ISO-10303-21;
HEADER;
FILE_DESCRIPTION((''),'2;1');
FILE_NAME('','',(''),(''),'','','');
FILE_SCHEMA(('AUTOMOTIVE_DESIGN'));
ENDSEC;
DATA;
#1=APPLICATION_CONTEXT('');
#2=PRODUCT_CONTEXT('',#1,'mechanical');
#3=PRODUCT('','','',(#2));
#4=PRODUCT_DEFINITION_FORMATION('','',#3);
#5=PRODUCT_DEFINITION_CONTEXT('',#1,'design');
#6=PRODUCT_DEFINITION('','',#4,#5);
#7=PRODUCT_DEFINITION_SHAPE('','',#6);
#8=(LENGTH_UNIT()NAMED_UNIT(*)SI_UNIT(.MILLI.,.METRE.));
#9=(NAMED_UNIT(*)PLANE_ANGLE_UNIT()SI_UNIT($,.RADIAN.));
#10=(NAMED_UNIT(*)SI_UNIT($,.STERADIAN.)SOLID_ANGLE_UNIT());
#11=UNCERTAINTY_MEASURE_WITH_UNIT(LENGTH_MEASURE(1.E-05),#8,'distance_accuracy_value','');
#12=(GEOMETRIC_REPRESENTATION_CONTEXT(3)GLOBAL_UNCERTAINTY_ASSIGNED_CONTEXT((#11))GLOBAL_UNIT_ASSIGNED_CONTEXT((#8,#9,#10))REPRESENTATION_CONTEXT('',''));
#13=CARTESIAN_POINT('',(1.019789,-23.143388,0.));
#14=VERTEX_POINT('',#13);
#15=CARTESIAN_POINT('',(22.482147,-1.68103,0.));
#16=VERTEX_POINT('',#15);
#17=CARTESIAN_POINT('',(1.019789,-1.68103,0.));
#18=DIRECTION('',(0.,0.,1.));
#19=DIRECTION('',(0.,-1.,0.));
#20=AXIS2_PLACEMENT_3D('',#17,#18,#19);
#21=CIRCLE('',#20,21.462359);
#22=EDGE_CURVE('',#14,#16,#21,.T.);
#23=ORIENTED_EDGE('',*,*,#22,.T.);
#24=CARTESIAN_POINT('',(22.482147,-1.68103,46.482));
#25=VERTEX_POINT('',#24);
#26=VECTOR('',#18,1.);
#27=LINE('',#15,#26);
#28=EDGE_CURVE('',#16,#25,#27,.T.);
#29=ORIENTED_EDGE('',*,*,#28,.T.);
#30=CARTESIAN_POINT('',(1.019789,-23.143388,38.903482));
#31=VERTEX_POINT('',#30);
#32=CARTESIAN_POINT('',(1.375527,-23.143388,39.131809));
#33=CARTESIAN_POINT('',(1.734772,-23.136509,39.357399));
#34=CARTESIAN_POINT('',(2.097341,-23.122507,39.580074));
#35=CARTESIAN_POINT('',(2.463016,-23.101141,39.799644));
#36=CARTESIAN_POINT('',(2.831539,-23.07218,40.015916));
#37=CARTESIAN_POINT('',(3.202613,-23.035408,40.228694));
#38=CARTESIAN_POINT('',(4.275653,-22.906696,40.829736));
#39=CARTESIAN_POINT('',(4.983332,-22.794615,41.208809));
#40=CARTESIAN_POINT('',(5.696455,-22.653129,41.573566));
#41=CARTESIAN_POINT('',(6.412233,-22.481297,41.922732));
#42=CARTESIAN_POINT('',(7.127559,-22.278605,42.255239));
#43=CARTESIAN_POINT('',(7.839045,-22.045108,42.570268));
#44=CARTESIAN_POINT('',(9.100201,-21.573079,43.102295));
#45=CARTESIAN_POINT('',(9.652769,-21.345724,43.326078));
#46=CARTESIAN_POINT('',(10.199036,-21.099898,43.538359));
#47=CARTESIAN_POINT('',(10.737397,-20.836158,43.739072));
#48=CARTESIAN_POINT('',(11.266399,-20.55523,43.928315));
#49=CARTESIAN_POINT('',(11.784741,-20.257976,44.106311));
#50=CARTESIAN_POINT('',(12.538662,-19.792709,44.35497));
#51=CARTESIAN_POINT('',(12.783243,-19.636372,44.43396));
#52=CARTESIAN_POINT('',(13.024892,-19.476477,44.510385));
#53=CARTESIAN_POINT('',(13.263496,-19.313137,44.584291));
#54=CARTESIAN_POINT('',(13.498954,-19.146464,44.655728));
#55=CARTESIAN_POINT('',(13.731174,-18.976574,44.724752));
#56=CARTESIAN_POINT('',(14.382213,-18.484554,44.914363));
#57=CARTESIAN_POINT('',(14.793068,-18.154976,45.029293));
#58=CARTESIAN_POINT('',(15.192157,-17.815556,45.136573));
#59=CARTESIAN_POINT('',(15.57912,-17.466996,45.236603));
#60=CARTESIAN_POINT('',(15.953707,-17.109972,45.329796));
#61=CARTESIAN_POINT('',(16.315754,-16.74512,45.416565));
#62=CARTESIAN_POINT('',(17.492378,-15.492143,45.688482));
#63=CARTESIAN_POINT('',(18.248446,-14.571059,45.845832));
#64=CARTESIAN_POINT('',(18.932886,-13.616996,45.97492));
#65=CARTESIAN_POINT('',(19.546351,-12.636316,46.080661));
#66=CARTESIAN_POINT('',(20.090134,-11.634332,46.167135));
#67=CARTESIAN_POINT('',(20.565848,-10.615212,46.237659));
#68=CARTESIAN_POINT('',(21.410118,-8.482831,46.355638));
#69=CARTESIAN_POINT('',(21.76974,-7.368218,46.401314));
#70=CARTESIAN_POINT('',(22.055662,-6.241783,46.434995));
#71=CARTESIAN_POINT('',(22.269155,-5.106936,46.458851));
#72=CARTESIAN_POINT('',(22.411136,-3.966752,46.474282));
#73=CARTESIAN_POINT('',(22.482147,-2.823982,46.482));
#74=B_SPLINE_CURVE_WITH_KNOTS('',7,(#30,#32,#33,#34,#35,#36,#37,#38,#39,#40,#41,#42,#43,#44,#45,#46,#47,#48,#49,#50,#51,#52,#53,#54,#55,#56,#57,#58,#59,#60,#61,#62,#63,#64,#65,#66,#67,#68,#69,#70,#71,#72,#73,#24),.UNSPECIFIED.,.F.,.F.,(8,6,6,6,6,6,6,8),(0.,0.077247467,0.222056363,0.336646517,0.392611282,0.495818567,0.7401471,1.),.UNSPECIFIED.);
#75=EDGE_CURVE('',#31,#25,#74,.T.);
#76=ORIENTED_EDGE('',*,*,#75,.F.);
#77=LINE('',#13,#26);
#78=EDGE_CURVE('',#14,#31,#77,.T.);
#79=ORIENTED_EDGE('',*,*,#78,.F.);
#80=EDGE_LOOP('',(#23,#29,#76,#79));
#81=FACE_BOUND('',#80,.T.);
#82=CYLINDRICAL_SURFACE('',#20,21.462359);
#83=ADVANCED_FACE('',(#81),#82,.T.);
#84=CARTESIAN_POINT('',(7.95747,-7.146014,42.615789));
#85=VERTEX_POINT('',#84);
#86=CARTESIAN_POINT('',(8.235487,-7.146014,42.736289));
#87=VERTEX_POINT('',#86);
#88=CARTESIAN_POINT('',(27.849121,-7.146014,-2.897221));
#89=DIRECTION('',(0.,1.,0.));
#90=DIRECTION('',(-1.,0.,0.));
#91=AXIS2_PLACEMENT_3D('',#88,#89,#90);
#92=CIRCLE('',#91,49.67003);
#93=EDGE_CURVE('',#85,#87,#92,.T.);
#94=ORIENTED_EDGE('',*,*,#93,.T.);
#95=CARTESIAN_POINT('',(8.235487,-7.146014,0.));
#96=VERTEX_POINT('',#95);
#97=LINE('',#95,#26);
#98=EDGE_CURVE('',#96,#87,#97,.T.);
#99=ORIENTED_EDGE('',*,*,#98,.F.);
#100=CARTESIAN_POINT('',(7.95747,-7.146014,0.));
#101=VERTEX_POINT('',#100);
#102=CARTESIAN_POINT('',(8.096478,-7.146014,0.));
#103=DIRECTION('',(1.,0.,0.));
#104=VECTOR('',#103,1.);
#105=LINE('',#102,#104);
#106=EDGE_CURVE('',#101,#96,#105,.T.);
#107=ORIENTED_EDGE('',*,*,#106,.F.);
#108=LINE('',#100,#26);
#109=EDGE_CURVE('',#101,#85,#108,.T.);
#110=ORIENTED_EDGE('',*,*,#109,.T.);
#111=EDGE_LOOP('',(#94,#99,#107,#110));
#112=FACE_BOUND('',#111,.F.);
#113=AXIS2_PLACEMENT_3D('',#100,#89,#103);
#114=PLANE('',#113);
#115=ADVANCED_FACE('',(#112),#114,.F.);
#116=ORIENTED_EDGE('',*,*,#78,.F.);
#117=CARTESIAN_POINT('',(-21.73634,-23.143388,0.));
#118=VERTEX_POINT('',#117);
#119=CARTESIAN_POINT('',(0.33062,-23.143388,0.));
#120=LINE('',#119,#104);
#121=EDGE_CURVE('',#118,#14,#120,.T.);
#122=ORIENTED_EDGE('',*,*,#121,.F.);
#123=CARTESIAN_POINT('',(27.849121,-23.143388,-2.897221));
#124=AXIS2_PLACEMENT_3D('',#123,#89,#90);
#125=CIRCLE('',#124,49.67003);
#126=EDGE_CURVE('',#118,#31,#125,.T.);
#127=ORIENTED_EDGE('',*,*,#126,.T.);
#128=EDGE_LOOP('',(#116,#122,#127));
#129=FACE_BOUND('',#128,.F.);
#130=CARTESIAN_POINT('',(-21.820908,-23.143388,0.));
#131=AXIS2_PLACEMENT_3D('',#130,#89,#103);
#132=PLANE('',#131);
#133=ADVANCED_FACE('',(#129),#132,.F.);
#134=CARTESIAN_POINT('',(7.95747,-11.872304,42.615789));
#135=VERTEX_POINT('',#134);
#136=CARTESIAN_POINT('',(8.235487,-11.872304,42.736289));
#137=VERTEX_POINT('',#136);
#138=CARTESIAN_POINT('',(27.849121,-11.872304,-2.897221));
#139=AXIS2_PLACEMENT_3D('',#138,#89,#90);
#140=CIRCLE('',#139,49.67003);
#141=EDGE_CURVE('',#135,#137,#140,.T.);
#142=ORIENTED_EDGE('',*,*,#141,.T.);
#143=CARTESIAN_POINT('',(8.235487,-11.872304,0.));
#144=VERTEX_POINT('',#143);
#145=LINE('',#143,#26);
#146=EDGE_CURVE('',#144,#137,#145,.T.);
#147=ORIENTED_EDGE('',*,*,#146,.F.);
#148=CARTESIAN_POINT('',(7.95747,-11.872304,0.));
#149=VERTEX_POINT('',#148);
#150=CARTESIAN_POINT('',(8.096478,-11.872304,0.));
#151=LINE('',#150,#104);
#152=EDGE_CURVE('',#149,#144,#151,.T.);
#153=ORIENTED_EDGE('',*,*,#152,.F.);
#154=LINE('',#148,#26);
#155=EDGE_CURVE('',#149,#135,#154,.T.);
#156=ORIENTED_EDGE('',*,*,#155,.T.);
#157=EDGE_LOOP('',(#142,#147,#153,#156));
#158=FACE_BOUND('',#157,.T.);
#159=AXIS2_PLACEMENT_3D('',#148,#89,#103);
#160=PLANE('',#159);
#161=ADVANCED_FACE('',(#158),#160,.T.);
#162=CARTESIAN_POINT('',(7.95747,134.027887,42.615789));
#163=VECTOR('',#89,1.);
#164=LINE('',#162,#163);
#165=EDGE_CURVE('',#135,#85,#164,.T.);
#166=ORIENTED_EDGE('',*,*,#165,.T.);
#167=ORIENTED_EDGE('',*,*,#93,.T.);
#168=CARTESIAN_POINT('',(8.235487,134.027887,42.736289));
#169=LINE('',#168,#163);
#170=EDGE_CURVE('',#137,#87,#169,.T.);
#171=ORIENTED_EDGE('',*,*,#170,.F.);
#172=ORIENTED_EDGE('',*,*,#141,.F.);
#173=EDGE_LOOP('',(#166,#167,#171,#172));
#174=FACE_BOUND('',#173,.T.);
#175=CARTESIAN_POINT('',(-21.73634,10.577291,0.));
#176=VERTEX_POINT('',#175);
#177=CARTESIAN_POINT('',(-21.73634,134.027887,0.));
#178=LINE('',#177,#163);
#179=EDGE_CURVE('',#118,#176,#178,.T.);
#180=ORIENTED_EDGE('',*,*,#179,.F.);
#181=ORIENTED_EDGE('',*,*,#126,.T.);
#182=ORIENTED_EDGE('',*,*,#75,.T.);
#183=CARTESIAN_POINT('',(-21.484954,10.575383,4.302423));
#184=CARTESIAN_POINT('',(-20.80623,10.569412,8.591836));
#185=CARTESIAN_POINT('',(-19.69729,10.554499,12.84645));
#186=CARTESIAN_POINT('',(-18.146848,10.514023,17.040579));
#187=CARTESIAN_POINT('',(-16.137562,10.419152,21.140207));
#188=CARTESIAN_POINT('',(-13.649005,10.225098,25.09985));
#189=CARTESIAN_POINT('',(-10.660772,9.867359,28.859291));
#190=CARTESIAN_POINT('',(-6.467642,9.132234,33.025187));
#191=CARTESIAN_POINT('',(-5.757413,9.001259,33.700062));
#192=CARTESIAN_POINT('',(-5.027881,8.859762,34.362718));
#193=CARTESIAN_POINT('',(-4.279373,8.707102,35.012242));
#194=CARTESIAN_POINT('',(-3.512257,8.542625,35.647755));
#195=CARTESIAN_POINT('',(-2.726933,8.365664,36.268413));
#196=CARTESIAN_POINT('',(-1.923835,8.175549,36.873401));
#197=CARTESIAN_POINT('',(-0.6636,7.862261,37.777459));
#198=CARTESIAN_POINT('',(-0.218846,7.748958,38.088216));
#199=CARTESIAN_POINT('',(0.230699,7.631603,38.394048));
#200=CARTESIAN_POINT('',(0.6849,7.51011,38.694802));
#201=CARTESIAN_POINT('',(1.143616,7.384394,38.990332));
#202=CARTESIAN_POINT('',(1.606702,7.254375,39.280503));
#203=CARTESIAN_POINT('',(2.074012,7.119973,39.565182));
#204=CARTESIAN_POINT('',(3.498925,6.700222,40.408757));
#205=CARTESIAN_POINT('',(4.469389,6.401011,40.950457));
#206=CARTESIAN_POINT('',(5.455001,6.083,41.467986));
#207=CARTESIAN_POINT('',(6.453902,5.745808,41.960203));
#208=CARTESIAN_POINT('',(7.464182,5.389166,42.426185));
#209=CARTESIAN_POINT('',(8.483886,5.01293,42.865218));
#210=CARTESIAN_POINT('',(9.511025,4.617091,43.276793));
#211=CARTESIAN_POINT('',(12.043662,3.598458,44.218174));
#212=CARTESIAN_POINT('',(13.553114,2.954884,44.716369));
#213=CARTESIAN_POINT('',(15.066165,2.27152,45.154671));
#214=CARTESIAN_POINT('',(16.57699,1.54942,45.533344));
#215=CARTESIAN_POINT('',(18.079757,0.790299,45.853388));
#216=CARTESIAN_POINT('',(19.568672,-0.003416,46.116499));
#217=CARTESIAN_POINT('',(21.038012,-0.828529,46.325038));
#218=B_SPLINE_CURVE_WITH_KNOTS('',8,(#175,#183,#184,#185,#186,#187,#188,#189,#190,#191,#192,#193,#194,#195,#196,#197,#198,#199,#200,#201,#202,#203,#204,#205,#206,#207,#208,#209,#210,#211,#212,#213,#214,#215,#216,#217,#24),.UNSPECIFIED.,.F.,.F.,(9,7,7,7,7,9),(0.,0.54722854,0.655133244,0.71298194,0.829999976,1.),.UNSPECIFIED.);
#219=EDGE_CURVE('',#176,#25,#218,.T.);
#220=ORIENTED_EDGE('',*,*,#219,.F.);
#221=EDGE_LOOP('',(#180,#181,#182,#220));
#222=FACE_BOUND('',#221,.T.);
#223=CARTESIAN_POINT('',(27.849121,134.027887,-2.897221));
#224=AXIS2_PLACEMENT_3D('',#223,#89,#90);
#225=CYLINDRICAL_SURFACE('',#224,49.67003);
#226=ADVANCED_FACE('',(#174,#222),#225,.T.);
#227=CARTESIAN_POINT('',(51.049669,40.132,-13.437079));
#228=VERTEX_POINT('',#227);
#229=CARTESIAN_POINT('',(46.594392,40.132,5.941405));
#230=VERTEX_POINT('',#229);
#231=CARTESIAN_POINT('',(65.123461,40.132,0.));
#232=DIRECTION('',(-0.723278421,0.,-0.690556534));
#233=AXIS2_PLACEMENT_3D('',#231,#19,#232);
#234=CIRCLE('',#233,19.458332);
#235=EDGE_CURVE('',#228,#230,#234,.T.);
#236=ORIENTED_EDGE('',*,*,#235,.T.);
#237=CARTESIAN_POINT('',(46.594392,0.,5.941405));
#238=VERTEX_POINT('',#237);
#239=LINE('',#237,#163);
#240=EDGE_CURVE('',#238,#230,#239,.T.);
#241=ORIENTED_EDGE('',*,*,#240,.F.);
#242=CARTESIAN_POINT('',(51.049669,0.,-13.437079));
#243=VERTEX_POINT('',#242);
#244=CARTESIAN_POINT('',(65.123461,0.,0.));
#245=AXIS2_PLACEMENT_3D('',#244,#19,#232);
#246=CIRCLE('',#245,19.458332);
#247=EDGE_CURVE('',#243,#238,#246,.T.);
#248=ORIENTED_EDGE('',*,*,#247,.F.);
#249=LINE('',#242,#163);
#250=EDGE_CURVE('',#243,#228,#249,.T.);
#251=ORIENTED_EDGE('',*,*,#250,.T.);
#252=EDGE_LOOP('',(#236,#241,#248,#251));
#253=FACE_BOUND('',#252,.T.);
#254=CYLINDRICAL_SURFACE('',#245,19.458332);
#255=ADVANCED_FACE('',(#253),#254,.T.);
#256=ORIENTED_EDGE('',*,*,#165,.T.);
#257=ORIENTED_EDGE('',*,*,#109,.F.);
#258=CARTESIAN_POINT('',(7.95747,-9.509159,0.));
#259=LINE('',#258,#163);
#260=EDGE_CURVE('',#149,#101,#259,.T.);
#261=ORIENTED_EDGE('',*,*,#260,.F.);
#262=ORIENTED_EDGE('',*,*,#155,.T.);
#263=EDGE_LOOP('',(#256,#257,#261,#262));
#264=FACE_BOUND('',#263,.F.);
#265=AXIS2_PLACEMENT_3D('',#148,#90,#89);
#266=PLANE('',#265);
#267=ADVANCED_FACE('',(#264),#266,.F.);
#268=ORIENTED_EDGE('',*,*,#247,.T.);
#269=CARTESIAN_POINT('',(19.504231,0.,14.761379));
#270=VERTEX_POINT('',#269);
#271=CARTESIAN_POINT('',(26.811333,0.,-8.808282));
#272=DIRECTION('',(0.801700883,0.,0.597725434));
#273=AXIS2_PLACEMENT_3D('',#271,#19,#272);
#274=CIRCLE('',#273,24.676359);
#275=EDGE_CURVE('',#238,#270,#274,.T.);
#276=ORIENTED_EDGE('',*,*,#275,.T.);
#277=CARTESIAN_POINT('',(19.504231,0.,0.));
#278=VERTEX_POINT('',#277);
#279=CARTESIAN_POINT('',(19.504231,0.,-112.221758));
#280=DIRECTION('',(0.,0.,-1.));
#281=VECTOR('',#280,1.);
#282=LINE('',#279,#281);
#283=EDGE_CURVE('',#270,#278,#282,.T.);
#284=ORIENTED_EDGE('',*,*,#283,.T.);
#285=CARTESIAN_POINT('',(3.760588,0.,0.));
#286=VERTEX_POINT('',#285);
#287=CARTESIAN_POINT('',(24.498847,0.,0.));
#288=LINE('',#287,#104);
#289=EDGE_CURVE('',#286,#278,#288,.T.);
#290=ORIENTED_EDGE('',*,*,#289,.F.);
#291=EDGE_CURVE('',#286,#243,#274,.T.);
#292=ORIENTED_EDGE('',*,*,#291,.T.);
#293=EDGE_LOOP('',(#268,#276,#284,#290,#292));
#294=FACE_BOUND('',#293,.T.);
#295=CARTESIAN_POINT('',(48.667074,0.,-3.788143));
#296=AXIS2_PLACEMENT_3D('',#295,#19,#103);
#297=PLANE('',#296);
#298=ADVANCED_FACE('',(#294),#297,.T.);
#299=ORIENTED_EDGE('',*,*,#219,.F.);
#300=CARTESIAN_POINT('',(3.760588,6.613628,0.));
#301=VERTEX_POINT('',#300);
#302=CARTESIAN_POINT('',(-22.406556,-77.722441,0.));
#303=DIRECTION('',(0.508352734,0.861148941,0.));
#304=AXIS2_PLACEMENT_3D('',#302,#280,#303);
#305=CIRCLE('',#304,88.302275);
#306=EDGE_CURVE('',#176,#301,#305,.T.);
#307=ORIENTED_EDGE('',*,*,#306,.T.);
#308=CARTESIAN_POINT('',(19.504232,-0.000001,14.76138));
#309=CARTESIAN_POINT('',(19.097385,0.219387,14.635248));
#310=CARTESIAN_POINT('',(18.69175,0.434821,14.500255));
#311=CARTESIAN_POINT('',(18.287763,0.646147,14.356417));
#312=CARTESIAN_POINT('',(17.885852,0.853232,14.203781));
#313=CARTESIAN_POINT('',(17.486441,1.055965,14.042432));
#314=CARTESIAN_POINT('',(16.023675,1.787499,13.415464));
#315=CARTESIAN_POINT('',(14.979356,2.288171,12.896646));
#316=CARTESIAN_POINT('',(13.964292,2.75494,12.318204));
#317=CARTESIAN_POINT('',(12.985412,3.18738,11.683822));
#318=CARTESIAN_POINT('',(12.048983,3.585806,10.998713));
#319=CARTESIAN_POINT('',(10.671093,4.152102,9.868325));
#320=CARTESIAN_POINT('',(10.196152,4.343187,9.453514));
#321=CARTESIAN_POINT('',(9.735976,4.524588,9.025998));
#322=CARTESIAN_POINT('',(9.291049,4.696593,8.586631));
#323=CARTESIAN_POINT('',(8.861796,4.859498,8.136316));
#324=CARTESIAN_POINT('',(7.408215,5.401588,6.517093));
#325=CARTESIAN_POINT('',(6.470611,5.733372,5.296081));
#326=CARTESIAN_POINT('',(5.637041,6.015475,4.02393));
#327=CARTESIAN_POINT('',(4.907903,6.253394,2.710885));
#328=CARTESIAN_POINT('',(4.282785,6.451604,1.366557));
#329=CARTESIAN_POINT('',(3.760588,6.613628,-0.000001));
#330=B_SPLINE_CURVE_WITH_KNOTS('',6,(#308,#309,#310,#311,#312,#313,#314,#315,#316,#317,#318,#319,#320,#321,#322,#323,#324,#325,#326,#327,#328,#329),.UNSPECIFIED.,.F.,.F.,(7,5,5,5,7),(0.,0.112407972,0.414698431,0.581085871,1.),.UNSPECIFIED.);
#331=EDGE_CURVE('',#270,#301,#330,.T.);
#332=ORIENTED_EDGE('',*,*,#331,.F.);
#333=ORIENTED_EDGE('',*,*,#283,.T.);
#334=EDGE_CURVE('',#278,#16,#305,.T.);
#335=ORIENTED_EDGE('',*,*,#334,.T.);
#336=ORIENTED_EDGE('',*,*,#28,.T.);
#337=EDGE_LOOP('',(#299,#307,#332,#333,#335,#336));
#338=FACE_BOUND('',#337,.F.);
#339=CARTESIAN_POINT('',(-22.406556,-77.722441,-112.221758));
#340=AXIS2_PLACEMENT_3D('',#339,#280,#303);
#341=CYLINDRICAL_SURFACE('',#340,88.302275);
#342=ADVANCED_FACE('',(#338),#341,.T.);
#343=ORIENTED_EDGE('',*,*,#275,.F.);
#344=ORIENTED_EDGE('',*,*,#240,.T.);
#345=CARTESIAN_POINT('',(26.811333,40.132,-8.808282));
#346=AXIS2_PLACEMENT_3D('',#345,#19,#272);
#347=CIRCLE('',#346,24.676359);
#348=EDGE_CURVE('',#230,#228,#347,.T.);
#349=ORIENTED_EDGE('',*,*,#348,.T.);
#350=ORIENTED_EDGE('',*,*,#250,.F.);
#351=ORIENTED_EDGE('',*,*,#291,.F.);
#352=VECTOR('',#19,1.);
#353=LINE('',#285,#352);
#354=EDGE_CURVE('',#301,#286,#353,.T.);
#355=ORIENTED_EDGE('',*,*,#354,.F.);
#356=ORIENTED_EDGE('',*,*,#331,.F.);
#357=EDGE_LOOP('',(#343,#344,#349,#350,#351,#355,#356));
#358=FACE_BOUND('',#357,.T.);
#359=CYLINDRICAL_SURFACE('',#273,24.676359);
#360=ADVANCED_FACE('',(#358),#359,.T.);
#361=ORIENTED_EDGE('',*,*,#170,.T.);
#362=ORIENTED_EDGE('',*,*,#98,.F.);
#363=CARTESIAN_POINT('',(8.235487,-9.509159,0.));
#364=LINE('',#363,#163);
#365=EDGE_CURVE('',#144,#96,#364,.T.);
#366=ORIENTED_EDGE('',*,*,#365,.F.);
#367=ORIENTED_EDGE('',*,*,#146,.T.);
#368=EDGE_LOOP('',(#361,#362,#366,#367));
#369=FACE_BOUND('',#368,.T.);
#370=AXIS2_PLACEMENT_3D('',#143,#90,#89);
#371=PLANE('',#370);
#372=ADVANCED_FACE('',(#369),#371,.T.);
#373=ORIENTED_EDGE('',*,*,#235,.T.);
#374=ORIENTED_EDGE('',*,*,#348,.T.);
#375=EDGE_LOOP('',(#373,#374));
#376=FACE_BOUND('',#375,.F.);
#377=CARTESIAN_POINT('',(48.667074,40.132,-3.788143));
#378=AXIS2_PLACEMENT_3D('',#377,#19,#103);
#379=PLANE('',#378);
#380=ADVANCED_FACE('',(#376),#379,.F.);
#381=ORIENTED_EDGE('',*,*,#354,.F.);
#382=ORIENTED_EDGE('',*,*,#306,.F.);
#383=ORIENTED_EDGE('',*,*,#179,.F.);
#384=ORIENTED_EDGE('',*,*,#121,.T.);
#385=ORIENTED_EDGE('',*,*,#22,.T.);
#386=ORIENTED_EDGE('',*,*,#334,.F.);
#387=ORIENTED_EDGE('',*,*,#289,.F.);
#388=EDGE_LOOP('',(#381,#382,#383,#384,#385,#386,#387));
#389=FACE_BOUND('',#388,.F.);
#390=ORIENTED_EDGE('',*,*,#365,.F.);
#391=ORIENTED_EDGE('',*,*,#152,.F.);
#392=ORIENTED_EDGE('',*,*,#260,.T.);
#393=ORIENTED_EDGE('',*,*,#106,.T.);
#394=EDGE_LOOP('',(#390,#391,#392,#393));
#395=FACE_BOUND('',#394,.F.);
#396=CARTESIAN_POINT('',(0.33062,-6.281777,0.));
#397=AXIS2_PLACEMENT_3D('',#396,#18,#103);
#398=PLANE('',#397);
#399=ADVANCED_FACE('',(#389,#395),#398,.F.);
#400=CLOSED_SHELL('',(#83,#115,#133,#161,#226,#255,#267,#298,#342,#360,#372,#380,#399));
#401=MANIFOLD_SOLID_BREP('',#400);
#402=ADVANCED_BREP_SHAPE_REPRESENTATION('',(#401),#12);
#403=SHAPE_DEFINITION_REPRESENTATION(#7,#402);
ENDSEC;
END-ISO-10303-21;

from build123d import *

# Parameters (mm, degrees)
F0_W        = 44.3030558527
F0_H        = 33.7232230231
F0_W_2      = 0.2780174837
F0_H_2      = 4.7262893058
F1_DEPTH    = 46.482
F2_T1_DEPTH = 280.6193273788
F3_R        = 21.4623585695
F4_T1_DEPTH = 270.9255150881
F6_DEPTH    = 40.132


# Not quite as in the source:
# - a fillet or chamfer that OpenCascade refuses, or shapes differently, is made with other operations: its cross-section is extruded or revolved along the edge and cut away or added


with BuildPart() as f1:
    # F0 (on Top) → F1 (new body)
    with BuildSketch(Plane.XY):
        with Locations((0.330619514, -6.2817768194)):
            Rectangle(F0_W, F0_H)
        with Locations((8.0964784138, -9.5091590192)):
            Rectangle(F0_W_2, F0_H_2, mode=Mode.SUBTRACT)
    extrude(amount=F1_DEPTH)

    # F2: fillet of radius 49.6700298323 on 1 edges, made by hand

    # F2_s2 → F2_t1 (cut)
    with BuildSketch(Plane.XZ.offset(-134.02788687)):
        with BuildLine():
            ThreePointArc((-21.8209084123, -2.8972208711), (-9.1217429277, 30.2730527625), (22.4821474403, 46.482))
            Line((22.4821474403, 46.482), (-21.8209084123, 46.482))
            Line((-21.8209084123, 46.482), (-21.8209084123, -2.8972208711))
        make_face()
    extrude(amount=F2_T1_DEPTH, mode=Mode.SUBTRACT)

    # F3
    f3_edges = [f1.edges().sort_by_distance(p)[0] for p in [
        (22.482147, -23.143388, 23.241),
    ]]
    fillet(f3_edges, radius=F3_R)

    # F4: fillet of radius 88.3022752574 on 2 edges, made by hand

    # F4_s2 → F4_t1 (cut)
    with BuildSketch(Plane.XY.offset(-112.221757544)):
        with BuildLine():
            ThreePointArc((22.4821474403, -1.6810297614), (0.8599678832, 7.4594865185), (-22.4065555773, 10.5798346922))
            Line((-22.4065555773, 10.5798346922), (22.4821474403, 10.5798346922))
            Line((22.4821474403, 10.5798346922), (22.4821474403, -1.6810297614))
        make_face()
    extrude(amount=F4_T1_DEPTH, mode=Mode.SUBTRACT)

    # F5 (on Front) → F6 (join)
    with BuildSketch(Plane.XZ):
        with BuildLine():
            ThreePointArc((51.0496692561, -13.4370785738), (51.3779423625, -11.1330198173), (51.4876921444, -8.808282204))
            ThreePointArc((51.4876921444, -8.808282204), (50.2324406688, -1.038184698), (46.594391977, 5.9414050633))
            ThreePointArc((46.594391977, 5.9414050633), (46.1598632778, -4.3598915413), (51.0496692561, -13.4370785738))
        make_face()
        with BuildLine():
            ThreePointArc((46.594391977, 5.9414050633), (50.2324406688, -1.038184698), (51.4876921444, -8.808282204))
            ThreePointArc((51.4876921444, -8.808282204), (51.3779423625, -11.1330198173), (51.0496692561, -13.4370785738))
            ThreePointArc((51.0496692561, -13.4370785738), (72.3613537789, -18.0621042721), (84.58179359, 0))
            ThreePointArc((84.58179359, 0), (68.1302794475, 19.2246129703), (46.594391977, 5.9414050633))
        make_face()
        with BuildLine():
            ThreePointArc((51.0496692561, -13.4370785738), (46.1598632778, -4.3598915413), (46.594391977, 5.9414050633))
            ThreePointArc((46.594391977, 5.9414050633), (2.7623791307, -14.3373401751), (51.0496692561, -13.4370785738))
        make_face()
    extrude(amount=-F6_DEPTH)


solid = f1.part
